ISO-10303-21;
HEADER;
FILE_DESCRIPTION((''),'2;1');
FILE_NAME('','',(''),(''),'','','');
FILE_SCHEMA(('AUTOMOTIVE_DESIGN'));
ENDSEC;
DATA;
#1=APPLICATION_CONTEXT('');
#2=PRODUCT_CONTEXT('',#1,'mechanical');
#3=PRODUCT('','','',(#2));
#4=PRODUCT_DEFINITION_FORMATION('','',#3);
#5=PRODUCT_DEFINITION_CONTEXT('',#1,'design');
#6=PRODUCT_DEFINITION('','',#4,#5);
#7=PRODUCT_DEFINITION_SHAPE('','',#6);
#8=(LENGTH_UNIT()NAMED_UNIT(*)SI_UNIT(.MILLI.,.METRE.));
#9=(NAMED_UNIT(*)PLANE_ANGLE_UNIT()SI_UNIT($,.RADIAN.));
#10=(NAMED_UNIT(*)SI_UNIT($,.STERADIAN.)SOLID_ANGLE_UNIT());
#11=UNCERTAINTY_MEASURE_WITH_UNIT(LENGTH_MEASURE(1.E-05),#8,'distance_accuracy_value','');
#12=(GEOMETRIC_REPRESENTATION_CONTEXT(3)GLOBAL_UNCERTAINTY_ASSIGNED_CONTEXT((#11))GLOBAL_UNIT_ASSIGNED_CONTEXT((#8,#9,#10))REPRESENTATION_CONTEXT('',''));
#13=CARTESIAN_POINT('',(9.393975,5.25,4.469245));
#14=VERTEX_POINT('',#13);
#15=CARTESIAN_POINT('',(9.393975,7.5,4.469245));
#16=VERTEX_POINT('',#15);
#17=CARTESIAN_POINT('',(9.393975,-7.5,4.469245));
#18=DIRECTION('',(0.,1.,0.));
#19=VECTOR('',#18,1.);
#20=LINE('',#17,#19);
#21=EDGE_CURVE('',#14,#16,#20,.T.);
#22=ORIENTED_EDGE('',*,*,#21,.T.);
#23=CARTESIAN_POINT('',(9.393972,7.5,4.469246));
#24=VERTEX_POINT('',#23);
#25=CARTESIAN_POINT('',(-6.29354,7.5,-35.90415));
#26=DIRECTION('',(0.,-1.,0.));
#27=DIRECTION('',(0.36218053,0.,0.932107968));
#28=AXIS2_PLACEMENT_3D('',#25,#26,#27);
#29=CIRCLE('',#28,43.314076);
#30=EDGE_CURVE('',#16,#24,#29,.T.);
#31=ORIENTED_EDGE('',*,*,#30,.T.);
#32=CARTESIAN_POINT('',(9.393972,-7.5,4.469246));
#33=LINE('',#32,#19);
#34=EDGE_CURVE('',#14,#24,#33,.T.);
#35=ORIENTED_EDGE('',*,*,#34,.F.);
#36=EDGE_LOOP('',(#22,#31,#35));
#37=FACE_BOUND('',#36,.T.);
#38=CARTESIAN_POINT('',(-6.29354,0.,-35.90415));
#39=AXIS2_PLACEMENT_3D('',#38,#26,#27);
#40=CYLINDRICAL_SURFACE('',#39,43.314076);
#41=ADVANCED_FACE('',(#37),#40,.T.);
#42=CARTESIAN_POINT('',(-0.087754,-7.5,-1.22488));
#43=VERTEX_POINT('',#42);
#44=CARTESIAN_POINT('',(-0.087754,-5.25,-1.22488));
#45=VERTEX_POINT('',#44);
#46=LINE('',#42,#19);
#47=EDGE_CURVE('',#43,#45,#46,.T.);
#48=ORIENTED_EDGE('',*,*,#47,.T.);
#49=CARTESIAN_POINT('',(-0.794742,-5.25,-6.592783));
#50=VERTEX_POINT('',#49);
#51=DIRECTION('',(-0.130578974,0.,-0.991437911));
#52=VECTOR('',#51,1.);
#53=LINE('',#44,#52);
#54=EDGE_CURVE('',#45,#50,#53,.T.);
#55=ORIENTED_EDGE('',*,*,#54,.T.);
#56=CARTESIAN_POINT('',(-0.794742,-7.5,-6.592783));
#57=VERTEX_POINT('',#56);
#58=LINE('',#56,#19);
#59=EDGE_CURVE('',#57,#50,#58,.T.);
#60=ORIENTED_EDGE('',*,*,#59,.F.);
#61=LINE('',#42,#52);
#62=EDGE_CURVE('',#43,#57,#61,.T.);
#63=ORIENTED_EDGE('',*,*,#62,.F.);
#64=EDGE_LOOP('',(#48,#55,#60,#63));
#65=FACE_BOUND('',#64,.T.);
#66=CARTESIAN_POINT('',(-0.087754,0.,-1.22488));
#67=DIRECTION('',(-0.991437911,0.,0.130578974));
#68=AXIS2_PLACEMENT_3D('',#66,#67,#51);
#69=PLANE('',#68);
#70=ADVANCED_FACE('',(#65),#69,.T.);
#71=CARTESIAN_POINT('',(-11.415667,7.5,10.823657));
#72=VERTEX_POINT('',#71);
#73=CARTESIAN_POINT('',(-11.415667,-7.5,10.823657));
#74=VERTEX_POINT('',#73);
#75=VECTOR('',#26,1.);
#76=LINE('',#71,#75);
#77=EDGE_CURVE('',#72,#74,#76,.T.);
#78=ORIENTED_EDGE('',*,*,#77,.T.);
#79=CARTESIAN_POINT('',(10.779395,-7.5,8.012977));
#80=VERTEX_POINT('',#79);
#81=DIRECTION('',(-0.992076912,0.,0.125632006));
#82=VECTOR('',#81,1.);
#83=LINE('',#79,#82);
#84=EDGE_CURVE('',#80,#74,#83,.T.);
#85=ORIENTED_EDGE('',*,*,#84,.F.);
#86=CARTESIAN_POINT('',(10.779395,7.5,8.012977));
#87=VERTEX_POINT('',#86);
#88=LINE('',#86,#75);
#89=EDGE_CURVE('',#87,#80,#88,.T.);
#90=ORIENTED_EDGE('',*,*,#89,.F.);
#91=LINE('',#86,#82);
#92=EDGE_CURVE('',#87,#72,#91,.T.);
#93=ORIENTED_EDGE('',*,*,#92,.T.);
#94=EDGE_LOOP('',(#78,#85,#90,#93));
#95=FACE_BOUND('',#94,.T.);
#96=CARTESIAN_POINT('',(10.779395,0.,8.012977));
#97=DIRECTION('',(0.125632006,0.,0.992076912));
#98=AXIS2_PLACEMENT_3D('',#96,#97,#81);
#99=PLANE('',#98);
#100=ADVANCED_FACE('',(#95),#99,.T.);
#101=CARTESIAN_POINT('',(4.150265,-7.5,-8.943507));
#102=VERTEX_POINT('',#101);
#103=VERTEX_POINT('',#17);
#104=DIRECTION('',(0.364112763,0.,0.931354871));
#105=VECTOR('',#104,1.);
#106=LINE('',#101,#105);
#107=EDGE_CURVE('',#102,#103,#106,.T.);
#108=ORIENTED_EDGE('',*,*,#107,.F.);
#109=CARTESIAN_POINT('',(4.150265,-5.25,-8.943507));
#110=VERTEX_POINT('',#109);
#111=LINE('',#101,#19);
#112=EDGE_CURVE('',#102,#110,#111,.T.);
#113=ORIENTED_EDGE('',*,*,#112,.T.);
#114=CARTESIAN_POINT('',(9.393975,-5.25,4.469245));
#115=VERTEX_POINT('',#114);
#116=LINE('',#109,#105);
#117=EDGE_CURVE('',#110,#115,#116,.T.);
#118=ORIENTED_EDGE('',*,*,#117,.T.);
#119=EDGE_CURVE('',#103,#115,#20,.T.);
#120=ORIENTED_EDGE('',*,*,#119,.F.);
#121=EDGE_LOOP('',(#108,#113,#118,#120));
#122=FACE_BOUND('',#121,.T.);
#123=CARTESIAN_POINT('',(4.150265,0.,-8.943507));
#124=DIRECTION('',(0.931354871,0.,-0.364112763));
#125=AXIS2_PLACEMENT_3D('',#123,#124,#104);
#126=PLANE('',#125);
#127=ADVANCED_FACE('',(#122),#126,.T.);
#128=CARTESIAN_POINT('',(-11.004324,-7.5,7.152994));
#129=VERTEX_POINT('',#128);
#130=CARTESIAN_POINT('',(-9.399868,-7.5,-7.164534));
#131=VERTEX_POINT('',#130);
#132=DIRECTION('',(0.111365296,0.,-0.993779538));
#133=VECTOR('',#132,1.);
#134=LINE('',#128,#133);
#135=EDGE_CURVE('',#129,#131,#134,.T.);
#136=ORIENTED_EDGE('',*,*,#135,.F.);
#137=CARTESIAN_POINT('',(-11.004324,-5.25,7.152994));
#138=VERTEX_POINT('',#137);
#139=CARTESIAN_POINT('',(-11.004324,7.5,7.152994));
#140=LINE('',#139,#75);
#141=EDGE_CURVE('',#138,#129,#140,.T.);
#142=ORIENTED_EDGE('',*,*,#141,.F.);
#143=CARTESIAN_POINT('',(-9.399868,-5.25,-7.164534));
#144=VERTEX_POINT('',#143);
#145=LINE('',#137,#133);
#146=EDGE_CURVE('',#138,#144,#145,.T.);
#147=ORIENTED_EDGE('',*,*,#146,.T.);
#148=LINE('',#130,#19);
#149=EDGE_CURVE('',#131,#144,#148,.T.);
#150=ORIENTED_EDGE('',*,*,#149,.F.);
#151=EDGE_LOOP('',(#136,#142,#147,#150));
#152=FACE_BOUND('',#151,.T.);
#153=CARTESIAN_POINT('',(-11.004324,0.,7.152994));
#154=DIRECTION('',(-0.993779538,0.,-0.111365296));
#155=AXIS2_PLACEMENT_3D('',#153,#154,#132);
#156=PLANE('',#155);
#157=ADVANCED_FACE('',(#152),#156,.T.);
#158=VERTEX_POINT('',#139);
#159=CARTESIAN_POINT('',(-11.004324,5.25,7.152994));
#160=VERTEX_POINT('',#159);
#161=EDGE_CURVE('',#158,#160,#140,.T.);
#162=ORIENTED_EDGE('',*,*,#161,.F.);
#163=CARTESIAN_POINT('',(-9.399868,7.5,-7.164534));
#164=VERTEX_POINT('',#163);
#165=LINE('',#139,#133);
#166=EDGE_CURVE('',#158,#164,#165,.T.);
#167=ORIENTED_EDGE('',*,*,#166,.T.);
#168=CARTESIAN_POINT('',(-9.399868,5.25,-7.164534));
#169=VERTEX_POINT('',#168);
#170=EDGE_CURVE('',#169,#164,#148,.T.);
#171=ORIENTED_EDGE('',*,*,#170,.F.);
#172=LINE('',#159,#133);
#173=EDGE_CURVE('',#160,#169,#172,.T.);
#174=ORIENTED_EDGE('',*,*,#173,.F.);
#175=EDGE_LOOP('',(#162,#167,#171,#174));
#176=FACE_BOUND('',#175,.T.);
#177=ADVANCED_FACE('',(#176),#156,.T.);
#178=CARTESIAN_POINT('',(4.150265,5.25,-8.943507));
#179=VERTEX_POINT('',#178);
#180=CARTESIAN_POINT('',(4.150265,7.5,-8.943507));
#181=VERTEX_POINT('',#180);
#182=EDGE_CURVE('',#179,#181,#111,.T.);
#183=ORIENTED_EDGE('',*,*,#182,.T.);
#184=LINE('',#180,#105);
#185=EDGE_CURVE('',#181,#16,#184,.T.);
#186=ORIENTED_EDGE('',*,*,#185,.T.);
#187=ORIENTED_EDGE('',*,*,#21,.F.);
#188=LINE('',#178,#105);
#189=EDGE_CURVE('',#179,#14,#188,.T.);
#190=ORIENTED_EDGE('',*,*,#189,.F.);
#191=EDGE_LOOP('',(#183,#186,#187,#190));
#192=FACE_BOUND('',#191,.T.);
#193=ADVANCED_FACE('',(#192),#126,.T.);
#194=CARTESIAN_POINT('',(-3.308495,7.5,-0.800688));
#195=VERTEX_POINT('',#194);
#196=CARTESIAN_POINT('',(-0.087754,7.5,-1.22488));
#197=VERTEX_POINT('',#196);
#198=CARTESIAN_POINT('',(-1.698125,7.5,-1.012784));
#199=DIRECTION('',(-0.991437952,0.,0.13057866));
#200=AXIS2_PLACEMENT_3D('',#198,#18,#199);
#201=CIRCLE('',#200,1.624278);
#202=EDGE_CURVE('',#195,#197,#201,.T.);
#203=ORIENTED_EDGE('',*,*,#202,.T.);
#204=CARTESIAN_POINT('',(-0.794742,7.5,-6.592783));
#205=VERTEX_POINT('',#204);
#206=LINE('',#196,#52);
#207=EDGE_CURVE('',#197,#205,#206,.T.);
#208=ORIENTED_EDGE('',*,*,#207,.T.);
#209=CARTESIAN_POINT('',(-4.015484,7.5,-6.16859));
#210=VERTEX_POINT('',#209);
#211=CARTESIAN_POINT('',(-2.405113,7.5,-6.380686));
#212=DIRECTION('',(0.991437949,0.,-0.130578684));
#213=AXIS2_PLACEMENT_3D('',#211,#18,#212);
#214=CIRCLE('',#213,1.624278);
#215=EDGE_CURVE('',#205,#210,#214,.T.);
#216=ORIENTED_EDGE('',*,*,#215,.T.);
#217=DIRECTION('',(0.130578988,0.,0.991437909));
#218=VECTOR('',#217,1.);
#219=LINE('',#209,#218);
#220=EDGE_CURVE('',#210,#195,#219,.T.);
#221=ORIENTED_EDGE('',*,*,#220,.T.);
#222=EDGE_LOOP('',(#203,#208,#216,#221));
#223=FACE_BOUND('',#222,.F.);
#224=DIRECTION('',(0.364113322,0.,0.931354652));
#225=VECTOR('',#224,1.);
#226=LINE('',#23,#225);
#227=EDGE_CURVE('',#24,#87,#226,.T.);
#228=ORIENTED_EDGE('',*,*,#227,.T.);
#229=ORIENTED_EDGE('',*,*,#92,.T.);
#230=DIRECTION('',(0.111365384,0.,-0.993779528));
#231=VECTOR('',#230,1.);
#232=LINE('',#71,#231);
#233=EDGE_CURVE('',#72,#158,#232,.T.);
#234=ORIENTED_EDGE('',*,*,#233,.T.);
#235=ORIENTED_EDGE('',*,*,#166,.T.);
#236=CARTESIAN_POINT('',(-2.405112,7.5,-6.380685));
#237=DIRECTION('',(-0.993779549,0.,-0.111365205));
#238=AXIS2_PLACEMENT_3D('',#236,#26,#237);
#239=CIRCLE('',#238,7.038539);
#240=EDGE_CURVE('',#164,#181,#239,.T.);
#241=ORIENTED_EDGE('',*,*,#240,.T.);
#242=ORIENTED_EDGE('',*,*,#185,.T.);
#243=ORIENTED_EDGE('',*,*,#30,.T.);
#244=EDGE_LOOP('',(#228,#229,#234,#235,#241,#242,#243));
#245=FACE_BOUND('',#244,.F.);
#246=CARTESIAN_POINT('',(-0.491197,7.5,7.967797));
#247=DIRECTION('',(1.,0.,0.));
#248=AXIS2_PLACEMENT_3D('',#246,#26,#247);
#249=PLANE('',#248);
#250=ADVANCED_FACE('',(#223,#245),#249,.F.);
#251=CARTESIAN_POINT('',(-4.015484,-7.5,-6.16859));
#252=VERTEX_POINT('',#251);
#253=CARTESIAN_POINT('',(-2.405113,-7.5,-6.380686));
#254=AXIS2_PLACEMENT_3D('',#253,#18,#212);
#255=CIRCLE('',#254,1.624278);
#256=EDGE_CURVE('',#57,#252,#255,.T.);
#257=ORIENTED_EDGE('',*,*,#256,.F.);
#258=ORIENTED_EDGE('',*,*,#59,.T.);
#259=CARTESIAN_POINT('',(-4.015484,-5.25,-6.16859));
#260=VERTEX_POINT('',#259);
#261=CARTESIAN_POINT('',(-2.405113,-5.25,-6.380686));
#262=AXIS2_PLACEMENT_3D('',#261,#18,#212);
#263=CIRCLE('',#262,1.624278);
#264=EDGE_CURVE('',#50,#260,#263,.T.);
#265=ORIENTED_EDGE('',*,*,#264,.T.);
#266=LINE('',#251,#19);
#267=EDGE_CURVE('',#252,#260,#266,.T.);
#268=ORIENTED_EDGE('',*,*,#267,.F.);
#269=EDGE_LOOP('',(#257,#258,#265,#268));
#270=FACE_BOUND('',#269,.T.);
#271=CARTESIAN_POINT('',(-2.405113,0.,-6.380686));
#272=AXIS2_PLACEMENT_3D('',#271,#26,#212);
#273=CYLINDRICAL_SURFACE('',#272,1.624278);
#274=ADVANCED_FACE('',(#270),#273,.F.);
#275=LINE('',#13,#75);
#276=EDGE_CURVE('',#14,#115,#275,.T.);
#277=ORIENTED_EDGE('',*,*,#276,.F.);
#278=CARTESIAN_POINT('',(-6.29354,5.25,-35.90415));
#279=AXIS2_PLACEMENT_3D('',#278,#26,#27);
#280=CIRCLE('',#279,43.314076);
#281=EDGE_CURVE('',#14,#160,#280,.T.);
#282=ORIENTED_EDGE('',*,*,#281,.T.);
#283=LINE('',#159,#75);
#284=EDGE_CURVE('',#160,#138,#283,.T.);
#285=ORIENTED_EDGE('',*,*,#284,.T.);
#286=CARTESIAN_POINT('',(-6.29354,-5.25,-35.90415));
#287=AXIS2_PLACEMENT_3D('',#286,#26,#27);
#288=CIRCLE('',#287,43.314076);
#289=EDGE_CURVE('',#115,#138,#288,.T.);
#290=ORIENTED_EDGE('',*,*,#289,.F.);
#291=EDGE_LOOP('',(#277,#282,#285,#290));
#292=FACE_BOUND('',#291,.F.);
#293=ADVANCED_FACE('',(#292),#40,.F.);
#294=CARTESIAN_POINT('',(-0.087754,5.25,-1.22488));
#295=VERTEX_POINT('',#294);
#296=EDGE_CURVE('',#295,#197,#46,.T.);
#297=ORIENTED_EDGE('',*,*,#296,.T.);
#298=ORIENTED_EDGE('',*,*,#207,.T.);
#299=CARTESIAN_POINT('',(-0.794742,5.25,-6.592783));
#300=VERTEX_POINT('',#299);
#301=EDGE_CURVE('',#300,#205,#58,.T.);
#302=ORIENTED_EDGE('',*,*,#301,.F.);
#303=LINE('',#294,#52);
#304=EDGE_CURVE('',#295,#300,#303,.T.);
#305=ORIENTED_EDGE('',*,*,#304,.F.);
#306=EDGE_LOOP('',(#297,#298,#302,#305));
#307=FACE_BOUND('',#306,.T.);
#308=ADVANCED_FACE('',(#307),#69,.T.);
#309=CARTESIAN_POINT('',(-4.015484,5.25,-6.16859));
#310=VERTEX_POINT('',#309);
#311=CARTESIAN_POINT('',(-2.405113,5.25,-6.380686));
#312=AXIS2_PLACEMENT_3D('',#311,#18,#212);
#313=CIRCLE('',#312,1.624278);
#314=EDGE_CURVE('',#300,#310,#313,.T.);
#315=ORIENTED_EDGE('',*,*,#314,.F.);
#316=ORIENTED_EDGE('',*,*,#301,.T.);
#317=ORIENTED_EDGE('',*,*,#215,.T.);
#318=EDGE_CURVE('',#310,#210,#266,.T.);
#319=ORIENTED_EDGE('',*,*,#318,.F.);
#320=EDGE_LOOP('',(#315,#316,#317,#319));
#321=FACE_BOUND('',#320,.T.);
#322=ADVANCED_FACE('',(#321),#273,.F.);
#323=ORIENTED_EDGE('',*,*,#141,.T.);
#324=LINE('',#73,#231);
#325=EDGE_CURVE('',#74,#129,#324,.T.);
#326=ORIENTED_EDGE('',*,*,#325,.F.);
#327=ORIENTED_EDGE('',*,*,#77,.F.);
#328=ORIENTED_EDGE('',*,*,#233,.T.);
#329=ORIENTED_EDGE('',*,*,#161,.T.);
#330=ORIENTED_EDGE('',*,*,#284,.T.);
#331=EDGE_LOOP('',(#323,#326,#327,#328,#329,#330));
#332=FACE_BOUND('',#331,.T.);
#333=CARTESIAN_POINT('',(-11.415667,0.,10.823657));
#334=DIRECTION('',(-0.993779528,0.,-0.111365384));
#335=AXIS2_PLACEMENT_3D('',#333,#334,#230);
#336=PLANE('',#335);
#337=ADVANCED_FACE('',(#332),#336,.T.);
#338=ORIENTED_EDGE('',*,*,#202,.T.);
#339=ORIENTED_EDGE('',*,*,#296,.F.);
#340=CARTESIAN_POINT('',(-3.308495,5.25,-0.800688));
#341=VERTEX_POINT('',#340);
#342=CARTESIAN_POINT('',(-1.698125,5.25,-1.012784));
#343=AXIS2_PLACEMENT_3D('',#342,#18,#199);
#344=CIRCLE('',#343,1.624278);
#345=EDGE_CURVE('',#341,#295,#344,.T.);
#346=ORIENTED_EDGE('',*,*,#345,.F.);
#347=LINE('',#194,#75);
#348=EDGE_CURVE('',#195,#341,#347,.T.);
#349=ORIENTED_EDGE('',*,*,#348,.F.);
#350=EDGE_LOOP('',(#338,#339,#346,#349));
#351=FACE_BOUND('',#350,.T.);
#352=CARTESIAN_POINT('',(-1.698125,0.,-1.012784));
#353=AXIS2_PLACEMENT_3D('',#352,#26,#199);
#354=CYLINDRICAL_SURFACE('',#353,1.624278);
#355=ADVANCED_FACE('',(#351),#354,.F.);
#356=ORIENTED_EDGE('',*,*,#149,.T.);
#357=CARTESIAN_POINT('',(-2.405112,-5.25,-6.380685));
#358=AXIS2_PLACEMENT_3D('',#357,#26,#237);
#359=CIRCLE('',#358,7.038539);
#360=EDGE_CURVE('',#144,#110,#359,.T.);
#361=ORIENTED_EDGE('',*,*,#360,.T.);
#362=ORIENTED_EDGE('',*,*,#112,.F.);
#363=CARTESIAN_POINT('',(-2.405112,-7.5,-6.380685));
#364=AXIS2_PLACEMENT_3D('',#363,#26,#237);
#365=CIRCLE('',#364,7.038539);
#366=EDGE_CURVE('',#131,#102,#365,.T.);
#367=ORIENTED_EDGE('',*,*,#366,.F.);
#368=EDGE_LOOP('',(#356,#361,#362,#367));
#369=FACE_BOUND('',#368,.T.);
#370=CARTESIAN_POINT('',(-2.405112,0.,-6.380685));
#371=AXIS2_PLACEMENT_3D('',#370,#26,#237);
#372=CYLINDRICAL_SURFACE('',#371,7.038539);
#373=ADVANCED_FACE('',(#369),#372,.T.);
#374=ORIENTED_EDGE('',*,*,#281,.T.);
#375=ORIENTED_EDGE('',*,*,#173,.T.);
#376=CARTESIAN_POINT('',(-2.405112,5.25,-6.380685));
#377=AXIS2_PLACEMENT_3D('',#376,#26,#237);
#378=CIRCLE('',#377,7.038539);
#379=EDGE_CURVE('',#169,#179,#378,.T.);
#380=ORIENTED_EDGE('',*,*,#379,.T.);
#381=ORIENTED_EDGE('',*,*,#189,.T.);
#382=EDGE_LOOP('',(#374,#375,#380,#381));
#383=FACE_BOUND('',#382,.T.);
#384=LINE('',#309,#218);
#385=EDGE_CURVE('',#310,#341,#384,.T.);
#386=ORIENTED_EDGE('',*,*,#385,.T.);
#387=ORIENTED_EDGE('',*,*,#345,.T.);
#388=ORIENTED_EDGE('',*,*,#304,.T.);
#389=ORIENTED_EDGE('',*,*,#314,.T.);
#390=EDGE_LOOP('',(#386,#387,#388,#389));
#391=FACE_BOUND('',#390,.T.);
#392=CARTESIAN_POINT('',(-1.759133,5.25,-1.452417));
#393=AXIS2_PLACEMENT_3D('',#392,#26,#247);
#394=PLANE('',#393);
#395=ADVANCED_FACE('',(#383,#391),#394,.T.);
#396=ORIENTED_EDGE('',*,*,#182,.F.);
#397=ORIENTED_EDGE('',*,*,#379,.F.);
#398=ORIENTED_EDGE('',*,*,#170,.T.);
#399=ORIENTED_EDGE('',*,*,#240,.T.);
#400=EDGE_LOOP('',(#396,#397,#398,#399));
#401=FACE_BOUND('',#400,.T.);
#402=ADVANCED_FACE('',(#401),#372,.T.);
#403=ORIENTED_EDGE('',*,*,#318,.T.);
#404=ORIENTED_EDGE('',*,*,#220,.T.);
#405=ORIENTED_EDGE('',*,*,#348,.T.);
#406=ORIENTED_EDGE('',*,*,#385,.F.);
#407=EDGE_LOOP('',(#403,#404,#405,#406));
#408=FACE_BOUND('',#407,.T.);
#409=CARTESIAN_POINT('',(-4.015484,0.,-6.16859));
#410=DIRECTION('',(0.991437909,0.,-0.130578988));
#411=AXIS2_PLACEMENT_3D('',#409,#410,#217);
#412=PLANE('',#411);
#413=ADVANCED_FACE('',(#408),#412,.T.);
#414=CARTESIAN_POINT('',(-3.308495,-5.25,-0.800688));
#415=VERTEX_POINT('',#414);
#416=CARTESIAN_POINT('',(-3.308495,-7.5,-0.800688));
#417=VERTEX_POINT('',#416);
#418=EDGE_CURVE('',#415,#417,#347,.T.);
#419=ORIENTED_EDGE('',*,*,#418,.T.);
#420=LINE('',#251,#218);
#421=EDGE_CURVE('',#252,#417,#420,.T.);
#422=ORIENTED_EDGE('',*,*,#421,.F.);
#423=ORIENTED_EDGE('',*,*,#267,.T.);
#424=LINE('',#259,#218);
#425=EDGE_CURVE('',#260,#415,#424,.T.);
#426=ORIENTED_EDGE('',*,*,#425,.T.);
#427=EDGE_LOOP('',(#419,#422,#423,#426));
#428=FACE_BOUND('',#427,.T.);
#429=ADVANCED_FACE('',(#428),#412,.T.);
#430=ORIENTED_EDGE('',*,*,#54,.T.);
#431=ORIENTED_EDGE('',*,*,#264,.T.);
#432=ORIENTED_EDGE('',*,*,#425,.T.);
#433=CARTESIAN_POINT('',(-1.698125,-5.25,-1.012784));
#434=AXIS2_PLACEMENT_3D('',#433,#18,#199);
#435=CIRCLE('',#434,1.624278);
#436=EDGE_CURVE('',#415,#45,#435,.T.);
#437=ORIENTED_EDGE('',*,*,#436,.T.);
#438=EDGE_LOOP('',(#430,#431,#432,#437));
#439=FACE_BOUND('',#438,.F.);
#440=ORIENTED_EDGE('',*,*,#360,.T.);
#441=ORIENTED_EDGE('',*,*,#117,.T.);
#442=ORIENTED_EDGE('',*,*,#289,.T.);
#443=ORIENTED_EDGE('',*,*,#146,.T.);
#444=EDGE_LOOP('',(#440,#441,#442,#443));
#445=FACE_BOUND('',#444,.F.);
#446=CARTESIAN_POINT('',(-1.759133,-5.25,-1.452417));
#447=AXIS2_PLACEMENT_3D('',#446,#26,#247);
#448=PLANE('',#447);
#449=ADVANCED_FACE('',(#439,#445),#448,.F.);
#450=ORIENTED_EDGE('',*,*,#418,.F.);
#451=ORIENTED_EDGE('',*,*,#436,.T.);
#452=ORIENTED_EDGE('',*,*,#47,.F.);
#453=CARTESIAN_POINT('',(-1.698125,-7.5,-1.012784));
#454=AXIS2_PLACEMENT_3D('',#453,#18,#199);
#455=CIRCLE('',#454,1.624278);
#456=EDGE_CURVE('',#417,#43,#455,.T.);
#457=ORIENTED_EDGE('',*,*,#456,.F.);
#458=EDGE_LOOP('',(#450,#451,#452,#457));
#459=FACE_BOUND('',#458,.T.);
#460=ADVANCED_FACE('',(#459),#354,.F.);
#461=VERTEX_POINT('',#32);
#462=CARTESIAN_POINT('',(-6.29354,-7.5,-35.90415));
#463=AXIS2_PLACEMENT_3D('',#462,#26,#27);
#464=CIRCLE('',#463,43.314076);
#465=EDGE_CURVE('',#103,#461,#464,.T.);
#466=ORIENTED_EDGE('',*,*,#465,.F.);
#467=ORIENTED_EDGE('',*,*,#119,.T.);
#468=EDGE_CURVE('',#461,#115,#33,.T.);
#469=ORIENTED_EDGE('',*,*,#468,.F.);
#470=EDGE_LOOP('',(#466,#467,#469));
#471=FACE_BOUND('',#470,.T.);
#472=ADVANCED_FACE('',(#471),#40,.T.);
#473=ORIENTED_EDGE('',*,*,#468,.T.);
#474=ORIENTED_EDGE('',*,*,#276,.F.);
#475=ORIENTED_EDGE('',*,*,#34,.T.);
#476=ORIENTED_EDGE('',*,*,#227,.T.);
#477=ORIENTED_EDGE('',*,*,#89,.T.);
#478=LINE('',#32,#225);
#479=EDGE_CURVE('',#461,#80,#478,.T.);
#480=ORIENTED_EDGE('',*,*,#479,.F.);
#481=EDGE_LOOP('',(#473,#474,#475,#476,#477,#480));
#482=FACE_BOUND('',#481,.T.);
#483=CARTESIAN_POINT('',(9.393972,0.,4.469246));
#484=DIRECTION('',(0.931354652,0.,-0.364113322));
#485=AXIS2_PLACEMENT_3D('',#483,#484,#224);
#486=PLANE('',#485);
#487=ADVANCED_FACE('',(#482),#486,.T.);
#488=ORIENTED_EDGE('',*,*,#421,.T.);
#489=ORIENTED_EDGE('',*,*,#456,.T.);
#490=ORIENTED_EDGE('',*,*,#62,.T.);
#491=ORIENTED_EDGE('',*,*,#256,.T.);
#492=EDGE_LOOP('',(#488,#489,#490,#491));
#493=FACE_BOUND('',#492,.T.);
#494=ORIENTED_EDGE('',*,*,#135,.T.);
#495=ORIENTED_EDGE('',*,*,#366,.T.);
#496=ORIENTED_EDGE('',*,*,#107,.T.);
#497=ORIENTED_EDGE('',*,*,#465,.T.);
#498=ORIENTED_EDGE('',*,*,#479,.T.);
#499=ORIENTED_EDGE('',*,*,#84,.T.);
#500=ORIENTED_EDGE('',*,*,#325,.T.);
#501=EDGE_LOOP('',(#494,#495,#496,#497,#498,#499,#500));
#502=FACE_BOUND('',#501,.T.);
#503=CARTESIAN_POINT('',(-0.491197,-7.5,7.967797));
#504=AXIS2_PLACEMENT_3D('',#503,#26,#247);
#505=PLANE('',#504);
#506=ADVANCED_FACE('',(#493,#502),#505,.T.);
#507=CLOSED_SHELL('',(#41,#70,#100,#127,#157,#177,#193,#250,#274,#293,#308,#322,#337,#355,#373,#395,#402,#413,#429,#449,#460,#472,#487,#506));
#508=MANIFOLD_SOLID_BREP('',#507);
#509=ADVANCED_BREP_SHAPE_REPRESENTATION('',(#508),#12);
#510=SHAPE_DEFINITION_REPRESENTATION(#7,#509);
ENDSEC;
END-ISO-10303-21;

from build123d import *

# Parameters (mm, degrees)
F1_DEPTH = 7.5
F2_DEPTH = 5.25


# Not quite as in the source:
# - ends of sketch curves that miss each other by under 0.0002 mm in the source are joined


with BuildPart() as f1:
    # F0 (on Front) → F1 (new body, symmetric)
    with BuildSketch(Plane.XZ):
        with BuildLine():
            ThreePointArc((-11.0043239024, 7.1529938994), (-0.6435162461, 7.0398408721), (9.3939724206, 4.4692455787))
            Line((9.3939724206, 4.4692455787), (10.7793952497, 8.0129774852))
            Line((10.7793952497, 8.0129774852), (-11.4156674583, 10.8236569963))
            Line((-11.4156674583, 10.8236569963), (-11.0043239024, 7.1529938994))
        make_face()
        with BuildLine():
            Line((4.1502654463, -8.9435067945), (9.39397455, 4.4692447462))
            ThreePointArc((9.39397455, 4.4692447462), (-0.6435162461, 7.0398408721), (-11.0043239024, 7.1529938994))
            Line((-11.0043239024, 7.1529938994), (-9.3998677417, -7.1645337772))
            ThreePointArc((-9.3998677417, -7.1645337772), (-3.3213281789, -13.3593367926), (4.1502654463, -8.9435067945))
        make_face()
        with BuildLine():
            ThreePointArc((-3.3084953622, -0.8006877888), (-1.4860286023, 0.5975869129), (-0.0877539006, -1.2248798469))
            Line((-0.0877539006, -1.2248798469), (-0.7947424255, -6.5927825509))
            ThreePointArc((-0.7947424255, -6.5927825509), (-2.6172092627, -7.9910572424), (-4.0154839644, -6.1685904826))
            Line((-4.0154839644, -6.1685904826), (-3.3084953622, -0.8006877888))
        make_face(mode=Mode.SUBTRACT)
    extrude(amount=F1_DEPTH, both=True)

    # F0 (on Front) → F2 (cut, symmetric)
    with BuildSketch(Plane.XZ):
        with BuildLine():
            Line((4.1502654463, -8.9435067945), (9.39397455, 4.4692447462))
            ThreePointArc((9.39397455, 4.4692447462), (-0.6435162461, 7.0398408721), (-11.0043239024, 7.1529938994))
            Line((-11.0043239024, 7.1529938994), (-9.3998677417, -7.1645337772))
            ThreePointArc((-9.3998677417, -7.1645337772), (-3.3213281789, -13.3593367926), (4.1502654463, -8.9435067945))
        make_face()
        with BuildLine():
            ThreePointArc((-3.3084953622, -0.8006877888), (-1.4860286023, 0.5975869129), (-0.0877539006, -1.2248798469))
            Line((-0.0877539006, -1.2248798469), (-0.7947424255, -6.5927825509))
            ThreePointArc((-0.7947424255, -6.5927825509), (-2.6172092627, -7.9910572424), (-4.0154839644, -6.1685904826))
            Line((-4.0154839644, -6.1685904826), (-3.3084953622, -0.8006877888))
        make_face(mode=Mode.SUBTRACT)
    extrude(amount=F2_DEPTH, both=True, mode=Mode.SUBTRACT)


solid = f1.part
